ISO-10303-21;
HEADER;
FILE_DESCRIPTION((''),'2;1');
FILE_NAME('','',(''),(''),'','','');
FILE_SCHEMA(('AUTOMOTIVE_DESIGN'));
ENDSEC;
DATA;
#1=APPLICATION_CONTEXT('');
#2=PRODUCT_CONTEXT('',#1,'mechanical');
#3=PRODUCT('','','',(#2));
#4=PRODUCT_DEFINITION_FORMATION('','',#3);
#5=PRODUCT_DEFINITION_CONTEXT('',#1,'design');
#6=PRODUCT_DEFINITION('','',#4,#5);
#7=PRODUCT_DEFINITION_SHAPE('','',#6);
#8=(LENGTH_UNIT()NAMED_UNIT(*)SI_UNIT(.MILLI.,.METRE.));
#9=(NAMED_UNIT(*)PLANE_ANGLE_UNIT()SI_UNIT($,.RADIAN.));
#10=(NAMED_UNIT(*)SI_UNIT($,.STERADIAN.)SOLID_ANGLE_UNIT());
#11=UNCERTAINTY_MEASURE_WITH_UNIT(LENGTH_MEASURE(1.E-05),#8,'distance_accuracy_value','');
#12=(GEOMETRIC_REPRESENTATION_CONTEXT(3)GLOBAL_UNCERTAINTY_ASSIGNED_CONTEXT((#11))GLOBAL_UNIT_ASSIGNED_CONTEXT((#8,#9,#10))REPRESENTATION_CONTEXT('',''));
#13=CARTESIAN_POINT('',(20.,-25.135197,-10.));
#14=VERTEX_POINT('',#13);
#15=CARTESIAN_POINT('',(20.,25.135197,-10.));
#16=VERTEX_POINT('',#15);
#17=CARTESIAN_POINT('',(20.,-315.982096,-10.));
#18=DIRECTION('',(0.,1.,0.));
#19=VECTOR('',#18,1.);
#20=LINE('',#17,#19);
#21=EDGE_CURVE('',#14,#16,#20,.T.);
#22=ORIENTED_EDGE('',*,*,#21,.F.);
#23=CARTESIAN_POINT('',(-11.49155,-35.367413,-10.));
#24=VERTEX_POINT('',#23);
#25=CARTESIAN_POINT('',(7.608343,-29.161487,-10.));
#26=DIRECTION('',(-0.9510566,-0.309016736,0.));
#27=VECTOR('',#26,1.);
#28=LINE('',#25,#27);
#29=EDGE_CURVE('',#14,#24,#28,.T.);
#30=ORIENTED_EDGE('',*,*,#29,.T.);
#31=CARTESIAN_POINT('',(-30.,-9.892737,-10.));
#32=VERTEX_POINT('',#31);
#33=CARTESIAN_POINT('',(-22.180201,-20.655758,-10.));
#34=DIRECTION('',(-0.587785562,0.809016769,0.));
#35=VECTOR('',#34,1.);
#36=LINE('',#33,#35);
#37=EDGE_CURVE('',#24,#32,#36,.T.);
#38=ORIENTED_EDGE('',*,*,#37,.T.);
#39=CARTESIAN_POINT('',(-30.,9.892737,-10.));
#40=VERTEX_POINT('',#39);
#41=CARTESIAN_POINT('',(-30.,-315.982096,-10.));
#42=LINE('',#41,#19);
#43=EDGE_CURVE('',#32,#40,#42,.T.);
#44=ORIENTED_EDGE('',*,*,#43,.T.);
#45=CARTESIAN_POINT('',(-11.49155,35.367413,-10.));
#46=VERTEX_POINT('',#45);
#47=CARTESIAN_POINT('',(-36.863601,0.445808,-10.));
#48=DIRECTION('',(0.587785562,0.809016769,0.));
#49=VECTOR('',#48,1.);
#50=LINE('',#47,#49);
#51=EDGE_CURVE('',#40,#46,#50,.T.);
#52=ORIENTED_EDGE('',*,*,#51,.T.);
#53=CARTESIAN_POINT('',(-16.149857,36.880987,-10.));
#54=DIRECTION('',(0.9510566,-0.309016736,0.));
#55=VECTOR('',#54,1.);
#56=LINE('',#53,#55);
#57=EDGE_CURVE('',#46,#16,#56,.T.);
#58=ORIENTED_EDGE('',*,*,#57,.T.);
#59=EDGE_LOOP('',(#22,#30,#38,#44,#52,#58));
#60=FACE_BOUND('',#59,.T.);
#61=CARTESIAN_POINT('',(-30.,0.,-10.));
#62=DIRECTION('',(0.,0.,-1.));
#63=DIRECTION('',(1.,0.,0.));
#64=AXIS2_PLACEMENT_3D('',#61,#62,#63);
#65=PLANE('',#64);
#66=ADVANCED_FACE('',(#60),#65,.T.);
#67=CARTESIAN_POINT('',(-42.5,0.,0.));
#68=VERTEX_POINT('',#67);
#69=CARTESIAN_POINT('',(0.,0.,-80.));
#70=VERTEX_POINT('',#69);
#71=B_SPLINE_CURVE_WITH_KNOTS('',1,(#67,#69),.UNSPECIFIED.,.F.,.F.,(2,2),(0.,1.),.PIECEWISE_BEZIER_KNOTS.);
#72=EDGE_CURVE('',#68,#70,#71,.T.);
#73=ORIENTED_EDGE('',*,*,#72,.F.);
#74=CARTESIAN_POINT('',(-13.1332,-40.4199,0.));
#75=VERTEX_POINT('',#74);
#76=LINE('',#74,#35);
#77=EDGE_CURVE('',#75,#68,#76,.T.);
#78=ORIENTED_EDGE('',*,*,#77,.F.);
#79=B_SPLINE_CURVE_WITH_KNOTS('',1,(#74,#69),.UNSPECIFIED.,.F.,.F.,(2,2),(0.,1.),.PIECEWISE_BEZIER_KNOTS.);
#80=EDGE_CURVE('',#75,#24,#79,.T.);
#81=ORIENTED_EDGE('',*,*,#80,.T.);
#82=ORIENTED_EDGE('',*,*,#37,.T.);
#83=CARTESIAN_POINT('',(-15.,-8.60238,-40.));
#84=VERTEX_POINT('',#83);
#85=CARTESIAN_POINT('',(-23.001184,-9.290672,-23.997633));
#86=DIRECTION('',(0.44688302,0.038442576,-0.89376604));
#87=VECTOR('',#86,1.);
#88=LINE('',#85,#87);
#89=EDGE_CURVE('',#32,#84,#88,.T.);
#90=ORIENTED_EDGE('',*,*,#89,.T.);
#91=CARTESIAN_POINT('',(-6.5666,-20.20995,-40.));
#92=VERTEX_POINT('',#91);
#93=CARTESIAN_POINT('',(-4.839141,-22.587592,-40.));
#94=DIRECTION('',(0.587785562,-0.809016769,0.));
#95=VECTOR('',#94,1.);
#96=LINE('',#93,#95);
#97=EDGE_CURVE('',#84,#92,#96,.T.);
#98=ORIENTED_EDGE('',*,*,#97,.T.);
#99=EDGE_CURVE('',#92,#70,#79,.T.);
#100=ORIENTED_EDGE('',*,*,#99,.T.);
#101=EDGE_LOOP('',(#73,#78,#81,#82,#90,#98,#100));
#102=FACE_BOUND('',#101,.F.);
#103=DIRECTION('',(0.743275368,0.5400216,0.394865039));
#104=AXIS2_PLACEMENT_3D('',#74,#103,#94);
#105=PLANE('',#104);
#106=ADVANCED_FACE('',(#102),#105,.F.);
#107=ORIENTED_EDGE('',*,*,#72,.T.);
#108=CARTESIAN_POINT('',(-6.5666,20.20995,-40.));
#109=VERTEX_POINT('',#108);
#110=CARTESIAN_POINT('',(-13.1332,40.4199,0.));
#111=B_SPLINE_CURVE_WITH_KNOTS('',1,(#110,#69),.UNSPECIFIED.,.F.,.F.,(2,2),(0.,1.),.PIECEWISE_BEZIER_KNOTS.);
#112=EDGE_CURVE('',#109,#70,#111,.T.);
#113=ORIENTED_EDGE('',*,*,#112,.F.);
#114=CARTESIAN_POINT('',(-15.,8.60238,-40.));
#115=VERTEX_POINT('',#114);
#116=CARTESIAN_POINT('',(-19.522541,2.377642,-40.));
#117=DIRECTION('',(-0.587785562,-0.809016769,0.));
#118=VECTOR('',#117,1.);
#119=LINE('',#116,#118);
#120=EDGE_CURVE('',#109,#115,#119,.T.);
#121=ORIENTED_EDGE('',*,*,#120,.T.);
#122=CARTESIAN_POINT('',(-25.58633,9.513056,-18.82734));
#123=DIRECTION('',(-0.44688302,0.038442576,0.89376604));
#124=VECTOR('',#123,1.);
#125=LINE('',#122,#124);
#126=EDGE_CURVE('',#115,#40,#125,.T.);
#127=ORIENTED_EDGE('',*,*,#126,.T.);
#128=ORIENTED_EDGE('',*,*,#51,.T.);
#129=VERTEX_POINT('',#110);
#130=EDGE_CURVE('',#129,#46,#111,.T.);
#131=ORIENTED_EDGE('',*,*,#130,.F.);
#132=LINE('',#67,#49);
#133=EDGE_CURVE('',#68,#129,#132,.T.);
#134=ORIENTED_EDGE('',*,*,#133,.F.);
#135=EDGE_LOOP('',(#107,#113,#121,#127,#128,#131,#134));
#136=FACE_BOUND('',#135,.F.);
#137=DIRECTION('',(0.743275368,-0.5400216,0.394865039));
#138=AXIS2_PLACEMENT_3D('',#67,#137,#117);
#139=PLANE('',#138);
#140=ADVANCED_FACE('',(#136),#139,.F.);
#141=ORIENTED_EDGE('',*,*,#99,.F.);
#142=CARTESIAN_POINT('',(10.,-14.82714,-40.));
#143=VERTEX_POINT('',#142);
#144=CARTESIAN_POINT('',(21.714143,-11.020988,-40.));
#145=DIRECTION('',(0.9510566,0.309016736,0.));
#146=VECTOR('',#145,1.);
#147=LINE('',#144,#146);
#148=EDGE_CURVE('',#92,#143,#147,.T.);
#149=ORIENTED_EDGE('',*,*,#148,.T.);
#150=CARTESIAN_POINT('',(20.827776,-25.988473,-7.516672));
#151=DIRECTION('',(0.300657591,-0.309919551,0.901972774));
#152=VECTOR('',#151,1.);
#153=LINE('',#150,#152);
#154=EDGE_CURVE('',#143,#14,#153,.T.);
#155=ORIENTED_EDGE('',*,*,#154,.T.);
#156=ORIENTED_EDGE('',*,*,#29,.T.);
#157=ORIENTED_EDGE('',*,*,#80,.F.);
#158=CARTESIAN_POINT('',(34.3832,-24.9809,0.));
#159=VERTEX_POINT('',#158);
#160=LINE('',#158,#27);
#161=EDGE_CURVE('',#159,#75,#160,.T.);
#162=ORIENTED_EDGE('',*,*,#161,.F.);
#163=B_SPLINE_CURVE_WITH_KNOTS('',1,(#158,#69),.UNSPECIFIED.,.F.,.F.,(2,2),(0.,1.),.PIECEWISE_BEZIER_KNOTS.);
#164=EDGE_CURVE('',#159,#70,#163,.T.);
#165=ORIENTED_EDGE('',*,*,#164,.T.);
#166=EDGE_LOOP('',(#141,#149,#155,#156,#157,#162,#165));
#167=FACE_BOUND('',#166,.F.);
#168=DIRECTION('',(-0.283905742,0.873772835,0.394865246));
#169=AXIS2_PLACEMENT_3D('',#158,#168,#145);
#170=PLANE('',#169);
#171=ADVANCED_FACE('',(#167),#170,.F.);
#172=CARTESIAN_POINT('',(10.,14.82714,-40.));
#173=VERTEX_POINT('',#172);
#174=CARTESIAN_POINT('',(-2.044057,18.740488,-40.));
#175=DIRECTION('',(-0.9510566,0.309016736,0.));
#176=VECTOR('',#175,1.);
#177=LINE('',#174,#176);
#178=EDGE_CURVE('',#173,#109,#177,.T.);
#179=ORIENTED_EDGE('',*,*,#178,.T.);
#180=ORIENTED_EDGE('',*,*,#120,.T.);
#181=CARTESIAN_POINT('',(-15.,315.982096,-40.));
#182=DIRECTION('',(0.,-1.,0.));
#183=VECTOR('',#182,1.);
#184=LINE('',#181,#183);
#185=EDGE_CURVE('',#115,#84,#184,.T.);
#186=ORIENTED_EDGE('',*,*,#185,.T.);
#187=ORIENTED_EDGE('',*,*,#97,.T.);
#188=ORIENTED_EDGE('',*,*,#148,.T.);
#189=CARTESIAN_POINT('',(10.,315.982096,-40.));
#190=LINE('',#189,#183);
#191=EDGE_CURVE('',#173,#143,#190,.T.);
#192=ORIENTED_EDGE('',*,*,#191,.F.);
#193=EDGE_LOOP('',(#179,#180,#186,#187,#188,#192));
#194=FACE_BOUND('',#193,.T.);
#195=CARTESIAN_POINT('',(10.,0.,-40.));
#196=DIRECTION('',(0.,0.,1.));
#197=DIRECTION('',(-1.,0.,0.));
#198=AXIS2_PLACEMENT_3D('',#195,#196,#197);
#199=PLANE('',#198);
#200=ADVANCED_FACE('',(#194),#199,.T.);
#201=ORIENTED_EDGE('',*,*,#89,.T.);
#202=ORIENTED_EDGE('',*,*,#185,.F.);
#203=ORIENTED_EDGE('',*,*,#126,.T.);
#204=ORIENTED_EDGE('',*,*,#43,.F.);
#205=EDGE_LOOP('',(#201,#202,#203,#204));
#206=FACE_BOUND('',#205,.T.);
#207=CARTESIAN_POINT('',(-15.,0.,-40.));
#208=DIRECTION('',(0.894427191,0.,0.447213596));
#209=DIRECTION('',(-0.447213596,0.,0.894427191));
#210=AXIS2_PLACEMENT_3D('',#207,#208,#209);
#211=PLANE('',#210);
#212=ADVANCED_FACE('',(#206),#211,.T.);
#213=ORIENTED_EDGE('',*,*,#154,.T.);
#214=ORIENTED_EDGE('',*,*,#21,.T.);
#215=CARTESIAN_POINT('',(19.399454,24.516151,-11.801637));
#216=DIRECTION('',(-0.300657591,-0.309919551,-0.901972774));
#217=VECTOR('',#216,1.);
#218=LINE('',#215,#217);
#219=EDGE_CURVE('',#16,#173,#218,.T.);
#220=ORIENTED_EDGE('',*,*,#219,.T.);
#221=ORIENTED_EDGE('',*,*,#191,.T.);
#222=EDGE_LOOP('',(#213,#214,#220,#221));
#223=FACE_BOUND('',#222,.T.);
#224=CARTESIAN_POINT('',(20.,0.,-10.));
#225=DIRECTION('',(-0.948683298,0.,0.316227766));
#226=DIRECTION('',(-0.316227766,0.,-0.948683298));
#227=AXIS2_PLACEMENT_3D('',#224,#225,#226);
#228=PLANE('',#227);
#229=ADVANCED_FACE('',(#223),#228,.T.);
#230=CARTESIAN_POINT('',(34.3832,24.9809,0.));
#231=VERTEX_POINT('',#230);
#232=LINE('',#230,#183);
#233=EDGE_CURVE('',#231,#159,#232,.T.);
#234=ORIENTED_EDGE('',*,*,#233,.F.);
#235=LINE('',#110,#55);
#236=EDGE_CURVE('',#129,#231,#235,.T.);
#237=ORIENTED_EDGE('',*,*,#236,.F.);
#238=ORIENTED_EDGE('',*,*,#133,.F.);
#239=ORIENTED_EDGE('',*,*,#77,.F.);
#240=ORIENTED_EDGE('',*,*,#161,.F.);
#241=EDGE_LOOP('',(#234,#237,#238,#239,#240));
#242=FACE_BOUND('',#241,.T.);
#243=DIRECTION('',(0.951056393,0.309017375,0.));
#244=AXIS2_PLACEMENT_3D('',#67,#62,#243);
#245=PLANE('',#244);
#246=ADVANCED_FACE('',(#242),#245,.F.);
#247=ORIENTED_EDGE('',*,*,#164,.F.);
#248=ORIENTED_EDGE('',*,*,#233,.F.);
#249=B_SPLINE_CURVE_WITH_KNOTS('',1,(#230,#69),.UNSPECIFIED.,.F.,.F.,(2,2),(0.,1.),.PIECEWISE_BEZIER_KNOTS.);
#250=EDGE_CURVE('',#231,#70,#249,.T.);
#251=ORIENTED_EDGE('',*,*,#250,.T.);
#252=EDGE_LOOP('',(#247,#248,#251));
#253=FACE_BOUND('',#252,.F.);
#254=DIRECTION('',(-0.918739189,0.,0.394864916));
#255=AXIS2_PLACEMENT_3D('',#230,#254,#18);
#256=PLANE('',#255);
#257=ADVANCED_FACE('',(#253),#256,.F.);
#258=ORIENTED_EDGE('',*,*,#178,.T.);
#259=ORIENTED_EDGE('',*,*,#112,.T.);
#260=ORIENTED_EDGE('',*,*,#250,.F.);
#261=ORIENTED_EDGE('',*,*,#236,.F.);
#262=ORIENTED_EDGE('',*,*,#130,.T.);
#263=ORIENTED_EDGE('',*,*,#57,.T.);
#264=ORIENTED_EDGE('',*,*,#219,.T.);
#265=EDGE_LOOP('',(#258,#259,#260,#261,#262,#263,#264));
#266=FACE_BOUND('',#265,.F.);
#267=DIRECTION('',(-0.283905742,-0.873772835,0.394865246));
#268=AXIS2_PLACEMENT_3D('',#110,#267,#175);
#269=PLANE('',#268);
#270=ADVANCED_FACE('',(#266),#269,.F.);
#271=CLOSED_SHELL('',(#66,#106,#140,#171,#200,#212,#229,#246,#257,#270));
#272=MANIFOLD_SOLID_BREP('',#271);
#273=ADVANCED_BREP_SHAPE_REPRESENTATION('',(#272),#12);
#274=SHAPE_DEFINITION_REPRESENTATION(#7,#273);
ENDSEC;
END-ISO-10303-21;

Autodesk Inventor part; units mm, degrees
ref_plane "YZ Plane" through (0, 0, 0) normal (1, 0, 0) x (0, 1, 0)
ref_plane "XZ Plane" through (0, 0, 0) normal (0, 1, 0) x (-1, 0, 0)
sketch "Эскиз1" plane through (0, 0, 0) normal (0, 0, 1) x (1, 0, 0)
  line L0 (-42.5, 0) -> (-13.1332, 40.4199)
  line L1 (-13.1332, 40.4199) -> (34.3832, 24.9809)
  line L2 (34.3832, 24.9809) -> (34.3832, -24.9809)
  line L3 (34.3832, -24.9809) -> (-13.1332, -40.4199)
  line L4 (-13.1332, -40.4199) -> (-42.5, 0)
  point P0 (0, 0)
  point P1 (0, 0)
sketch "Эскиз2" plane through (0, 0, 0) normal (0, 1, 0) x (-1, 0, 0)
  line L0 (30, -10) -> (-20, -10)
  line L1 (-20, -10) -> (-10, -40)
  line L2 (-10, -40) -> (15, -40)
  line L3 (15, -40) -> (30, -10)
  line L4 (13.1332, 0) -> (-34.3832, 0) projected
  line L5 (42.5, 0) -> (13.1332, 0) projected
  point P0 (0, 0)
  dimension "d1" = 10
  dimension "d2" = 30
  dimension "d3" = 10
  dimension "d4" = 20
  dimension "d5" = 50
  dimension "d6" = 25
ref_plane "РабПлоскость1" through (0, 0, -80) normal (0, 0, 1) x (1, 0, 0)
sketch "Эскиз3" plane through (0, 0, -80) normal (0, 0, 1) x (1, 0, 0)
  point P0 (0, 0)
  point P1 (0, 0)
  point P2 (0, 0)
loft "Лофт1" add profiles "Эскиз1" section 2 point at (0, 0, -80)
extrude "Выдавливание1" cut sketch "Эскиз2" along normal through all both and the other way through all
properties part number "Шар"
